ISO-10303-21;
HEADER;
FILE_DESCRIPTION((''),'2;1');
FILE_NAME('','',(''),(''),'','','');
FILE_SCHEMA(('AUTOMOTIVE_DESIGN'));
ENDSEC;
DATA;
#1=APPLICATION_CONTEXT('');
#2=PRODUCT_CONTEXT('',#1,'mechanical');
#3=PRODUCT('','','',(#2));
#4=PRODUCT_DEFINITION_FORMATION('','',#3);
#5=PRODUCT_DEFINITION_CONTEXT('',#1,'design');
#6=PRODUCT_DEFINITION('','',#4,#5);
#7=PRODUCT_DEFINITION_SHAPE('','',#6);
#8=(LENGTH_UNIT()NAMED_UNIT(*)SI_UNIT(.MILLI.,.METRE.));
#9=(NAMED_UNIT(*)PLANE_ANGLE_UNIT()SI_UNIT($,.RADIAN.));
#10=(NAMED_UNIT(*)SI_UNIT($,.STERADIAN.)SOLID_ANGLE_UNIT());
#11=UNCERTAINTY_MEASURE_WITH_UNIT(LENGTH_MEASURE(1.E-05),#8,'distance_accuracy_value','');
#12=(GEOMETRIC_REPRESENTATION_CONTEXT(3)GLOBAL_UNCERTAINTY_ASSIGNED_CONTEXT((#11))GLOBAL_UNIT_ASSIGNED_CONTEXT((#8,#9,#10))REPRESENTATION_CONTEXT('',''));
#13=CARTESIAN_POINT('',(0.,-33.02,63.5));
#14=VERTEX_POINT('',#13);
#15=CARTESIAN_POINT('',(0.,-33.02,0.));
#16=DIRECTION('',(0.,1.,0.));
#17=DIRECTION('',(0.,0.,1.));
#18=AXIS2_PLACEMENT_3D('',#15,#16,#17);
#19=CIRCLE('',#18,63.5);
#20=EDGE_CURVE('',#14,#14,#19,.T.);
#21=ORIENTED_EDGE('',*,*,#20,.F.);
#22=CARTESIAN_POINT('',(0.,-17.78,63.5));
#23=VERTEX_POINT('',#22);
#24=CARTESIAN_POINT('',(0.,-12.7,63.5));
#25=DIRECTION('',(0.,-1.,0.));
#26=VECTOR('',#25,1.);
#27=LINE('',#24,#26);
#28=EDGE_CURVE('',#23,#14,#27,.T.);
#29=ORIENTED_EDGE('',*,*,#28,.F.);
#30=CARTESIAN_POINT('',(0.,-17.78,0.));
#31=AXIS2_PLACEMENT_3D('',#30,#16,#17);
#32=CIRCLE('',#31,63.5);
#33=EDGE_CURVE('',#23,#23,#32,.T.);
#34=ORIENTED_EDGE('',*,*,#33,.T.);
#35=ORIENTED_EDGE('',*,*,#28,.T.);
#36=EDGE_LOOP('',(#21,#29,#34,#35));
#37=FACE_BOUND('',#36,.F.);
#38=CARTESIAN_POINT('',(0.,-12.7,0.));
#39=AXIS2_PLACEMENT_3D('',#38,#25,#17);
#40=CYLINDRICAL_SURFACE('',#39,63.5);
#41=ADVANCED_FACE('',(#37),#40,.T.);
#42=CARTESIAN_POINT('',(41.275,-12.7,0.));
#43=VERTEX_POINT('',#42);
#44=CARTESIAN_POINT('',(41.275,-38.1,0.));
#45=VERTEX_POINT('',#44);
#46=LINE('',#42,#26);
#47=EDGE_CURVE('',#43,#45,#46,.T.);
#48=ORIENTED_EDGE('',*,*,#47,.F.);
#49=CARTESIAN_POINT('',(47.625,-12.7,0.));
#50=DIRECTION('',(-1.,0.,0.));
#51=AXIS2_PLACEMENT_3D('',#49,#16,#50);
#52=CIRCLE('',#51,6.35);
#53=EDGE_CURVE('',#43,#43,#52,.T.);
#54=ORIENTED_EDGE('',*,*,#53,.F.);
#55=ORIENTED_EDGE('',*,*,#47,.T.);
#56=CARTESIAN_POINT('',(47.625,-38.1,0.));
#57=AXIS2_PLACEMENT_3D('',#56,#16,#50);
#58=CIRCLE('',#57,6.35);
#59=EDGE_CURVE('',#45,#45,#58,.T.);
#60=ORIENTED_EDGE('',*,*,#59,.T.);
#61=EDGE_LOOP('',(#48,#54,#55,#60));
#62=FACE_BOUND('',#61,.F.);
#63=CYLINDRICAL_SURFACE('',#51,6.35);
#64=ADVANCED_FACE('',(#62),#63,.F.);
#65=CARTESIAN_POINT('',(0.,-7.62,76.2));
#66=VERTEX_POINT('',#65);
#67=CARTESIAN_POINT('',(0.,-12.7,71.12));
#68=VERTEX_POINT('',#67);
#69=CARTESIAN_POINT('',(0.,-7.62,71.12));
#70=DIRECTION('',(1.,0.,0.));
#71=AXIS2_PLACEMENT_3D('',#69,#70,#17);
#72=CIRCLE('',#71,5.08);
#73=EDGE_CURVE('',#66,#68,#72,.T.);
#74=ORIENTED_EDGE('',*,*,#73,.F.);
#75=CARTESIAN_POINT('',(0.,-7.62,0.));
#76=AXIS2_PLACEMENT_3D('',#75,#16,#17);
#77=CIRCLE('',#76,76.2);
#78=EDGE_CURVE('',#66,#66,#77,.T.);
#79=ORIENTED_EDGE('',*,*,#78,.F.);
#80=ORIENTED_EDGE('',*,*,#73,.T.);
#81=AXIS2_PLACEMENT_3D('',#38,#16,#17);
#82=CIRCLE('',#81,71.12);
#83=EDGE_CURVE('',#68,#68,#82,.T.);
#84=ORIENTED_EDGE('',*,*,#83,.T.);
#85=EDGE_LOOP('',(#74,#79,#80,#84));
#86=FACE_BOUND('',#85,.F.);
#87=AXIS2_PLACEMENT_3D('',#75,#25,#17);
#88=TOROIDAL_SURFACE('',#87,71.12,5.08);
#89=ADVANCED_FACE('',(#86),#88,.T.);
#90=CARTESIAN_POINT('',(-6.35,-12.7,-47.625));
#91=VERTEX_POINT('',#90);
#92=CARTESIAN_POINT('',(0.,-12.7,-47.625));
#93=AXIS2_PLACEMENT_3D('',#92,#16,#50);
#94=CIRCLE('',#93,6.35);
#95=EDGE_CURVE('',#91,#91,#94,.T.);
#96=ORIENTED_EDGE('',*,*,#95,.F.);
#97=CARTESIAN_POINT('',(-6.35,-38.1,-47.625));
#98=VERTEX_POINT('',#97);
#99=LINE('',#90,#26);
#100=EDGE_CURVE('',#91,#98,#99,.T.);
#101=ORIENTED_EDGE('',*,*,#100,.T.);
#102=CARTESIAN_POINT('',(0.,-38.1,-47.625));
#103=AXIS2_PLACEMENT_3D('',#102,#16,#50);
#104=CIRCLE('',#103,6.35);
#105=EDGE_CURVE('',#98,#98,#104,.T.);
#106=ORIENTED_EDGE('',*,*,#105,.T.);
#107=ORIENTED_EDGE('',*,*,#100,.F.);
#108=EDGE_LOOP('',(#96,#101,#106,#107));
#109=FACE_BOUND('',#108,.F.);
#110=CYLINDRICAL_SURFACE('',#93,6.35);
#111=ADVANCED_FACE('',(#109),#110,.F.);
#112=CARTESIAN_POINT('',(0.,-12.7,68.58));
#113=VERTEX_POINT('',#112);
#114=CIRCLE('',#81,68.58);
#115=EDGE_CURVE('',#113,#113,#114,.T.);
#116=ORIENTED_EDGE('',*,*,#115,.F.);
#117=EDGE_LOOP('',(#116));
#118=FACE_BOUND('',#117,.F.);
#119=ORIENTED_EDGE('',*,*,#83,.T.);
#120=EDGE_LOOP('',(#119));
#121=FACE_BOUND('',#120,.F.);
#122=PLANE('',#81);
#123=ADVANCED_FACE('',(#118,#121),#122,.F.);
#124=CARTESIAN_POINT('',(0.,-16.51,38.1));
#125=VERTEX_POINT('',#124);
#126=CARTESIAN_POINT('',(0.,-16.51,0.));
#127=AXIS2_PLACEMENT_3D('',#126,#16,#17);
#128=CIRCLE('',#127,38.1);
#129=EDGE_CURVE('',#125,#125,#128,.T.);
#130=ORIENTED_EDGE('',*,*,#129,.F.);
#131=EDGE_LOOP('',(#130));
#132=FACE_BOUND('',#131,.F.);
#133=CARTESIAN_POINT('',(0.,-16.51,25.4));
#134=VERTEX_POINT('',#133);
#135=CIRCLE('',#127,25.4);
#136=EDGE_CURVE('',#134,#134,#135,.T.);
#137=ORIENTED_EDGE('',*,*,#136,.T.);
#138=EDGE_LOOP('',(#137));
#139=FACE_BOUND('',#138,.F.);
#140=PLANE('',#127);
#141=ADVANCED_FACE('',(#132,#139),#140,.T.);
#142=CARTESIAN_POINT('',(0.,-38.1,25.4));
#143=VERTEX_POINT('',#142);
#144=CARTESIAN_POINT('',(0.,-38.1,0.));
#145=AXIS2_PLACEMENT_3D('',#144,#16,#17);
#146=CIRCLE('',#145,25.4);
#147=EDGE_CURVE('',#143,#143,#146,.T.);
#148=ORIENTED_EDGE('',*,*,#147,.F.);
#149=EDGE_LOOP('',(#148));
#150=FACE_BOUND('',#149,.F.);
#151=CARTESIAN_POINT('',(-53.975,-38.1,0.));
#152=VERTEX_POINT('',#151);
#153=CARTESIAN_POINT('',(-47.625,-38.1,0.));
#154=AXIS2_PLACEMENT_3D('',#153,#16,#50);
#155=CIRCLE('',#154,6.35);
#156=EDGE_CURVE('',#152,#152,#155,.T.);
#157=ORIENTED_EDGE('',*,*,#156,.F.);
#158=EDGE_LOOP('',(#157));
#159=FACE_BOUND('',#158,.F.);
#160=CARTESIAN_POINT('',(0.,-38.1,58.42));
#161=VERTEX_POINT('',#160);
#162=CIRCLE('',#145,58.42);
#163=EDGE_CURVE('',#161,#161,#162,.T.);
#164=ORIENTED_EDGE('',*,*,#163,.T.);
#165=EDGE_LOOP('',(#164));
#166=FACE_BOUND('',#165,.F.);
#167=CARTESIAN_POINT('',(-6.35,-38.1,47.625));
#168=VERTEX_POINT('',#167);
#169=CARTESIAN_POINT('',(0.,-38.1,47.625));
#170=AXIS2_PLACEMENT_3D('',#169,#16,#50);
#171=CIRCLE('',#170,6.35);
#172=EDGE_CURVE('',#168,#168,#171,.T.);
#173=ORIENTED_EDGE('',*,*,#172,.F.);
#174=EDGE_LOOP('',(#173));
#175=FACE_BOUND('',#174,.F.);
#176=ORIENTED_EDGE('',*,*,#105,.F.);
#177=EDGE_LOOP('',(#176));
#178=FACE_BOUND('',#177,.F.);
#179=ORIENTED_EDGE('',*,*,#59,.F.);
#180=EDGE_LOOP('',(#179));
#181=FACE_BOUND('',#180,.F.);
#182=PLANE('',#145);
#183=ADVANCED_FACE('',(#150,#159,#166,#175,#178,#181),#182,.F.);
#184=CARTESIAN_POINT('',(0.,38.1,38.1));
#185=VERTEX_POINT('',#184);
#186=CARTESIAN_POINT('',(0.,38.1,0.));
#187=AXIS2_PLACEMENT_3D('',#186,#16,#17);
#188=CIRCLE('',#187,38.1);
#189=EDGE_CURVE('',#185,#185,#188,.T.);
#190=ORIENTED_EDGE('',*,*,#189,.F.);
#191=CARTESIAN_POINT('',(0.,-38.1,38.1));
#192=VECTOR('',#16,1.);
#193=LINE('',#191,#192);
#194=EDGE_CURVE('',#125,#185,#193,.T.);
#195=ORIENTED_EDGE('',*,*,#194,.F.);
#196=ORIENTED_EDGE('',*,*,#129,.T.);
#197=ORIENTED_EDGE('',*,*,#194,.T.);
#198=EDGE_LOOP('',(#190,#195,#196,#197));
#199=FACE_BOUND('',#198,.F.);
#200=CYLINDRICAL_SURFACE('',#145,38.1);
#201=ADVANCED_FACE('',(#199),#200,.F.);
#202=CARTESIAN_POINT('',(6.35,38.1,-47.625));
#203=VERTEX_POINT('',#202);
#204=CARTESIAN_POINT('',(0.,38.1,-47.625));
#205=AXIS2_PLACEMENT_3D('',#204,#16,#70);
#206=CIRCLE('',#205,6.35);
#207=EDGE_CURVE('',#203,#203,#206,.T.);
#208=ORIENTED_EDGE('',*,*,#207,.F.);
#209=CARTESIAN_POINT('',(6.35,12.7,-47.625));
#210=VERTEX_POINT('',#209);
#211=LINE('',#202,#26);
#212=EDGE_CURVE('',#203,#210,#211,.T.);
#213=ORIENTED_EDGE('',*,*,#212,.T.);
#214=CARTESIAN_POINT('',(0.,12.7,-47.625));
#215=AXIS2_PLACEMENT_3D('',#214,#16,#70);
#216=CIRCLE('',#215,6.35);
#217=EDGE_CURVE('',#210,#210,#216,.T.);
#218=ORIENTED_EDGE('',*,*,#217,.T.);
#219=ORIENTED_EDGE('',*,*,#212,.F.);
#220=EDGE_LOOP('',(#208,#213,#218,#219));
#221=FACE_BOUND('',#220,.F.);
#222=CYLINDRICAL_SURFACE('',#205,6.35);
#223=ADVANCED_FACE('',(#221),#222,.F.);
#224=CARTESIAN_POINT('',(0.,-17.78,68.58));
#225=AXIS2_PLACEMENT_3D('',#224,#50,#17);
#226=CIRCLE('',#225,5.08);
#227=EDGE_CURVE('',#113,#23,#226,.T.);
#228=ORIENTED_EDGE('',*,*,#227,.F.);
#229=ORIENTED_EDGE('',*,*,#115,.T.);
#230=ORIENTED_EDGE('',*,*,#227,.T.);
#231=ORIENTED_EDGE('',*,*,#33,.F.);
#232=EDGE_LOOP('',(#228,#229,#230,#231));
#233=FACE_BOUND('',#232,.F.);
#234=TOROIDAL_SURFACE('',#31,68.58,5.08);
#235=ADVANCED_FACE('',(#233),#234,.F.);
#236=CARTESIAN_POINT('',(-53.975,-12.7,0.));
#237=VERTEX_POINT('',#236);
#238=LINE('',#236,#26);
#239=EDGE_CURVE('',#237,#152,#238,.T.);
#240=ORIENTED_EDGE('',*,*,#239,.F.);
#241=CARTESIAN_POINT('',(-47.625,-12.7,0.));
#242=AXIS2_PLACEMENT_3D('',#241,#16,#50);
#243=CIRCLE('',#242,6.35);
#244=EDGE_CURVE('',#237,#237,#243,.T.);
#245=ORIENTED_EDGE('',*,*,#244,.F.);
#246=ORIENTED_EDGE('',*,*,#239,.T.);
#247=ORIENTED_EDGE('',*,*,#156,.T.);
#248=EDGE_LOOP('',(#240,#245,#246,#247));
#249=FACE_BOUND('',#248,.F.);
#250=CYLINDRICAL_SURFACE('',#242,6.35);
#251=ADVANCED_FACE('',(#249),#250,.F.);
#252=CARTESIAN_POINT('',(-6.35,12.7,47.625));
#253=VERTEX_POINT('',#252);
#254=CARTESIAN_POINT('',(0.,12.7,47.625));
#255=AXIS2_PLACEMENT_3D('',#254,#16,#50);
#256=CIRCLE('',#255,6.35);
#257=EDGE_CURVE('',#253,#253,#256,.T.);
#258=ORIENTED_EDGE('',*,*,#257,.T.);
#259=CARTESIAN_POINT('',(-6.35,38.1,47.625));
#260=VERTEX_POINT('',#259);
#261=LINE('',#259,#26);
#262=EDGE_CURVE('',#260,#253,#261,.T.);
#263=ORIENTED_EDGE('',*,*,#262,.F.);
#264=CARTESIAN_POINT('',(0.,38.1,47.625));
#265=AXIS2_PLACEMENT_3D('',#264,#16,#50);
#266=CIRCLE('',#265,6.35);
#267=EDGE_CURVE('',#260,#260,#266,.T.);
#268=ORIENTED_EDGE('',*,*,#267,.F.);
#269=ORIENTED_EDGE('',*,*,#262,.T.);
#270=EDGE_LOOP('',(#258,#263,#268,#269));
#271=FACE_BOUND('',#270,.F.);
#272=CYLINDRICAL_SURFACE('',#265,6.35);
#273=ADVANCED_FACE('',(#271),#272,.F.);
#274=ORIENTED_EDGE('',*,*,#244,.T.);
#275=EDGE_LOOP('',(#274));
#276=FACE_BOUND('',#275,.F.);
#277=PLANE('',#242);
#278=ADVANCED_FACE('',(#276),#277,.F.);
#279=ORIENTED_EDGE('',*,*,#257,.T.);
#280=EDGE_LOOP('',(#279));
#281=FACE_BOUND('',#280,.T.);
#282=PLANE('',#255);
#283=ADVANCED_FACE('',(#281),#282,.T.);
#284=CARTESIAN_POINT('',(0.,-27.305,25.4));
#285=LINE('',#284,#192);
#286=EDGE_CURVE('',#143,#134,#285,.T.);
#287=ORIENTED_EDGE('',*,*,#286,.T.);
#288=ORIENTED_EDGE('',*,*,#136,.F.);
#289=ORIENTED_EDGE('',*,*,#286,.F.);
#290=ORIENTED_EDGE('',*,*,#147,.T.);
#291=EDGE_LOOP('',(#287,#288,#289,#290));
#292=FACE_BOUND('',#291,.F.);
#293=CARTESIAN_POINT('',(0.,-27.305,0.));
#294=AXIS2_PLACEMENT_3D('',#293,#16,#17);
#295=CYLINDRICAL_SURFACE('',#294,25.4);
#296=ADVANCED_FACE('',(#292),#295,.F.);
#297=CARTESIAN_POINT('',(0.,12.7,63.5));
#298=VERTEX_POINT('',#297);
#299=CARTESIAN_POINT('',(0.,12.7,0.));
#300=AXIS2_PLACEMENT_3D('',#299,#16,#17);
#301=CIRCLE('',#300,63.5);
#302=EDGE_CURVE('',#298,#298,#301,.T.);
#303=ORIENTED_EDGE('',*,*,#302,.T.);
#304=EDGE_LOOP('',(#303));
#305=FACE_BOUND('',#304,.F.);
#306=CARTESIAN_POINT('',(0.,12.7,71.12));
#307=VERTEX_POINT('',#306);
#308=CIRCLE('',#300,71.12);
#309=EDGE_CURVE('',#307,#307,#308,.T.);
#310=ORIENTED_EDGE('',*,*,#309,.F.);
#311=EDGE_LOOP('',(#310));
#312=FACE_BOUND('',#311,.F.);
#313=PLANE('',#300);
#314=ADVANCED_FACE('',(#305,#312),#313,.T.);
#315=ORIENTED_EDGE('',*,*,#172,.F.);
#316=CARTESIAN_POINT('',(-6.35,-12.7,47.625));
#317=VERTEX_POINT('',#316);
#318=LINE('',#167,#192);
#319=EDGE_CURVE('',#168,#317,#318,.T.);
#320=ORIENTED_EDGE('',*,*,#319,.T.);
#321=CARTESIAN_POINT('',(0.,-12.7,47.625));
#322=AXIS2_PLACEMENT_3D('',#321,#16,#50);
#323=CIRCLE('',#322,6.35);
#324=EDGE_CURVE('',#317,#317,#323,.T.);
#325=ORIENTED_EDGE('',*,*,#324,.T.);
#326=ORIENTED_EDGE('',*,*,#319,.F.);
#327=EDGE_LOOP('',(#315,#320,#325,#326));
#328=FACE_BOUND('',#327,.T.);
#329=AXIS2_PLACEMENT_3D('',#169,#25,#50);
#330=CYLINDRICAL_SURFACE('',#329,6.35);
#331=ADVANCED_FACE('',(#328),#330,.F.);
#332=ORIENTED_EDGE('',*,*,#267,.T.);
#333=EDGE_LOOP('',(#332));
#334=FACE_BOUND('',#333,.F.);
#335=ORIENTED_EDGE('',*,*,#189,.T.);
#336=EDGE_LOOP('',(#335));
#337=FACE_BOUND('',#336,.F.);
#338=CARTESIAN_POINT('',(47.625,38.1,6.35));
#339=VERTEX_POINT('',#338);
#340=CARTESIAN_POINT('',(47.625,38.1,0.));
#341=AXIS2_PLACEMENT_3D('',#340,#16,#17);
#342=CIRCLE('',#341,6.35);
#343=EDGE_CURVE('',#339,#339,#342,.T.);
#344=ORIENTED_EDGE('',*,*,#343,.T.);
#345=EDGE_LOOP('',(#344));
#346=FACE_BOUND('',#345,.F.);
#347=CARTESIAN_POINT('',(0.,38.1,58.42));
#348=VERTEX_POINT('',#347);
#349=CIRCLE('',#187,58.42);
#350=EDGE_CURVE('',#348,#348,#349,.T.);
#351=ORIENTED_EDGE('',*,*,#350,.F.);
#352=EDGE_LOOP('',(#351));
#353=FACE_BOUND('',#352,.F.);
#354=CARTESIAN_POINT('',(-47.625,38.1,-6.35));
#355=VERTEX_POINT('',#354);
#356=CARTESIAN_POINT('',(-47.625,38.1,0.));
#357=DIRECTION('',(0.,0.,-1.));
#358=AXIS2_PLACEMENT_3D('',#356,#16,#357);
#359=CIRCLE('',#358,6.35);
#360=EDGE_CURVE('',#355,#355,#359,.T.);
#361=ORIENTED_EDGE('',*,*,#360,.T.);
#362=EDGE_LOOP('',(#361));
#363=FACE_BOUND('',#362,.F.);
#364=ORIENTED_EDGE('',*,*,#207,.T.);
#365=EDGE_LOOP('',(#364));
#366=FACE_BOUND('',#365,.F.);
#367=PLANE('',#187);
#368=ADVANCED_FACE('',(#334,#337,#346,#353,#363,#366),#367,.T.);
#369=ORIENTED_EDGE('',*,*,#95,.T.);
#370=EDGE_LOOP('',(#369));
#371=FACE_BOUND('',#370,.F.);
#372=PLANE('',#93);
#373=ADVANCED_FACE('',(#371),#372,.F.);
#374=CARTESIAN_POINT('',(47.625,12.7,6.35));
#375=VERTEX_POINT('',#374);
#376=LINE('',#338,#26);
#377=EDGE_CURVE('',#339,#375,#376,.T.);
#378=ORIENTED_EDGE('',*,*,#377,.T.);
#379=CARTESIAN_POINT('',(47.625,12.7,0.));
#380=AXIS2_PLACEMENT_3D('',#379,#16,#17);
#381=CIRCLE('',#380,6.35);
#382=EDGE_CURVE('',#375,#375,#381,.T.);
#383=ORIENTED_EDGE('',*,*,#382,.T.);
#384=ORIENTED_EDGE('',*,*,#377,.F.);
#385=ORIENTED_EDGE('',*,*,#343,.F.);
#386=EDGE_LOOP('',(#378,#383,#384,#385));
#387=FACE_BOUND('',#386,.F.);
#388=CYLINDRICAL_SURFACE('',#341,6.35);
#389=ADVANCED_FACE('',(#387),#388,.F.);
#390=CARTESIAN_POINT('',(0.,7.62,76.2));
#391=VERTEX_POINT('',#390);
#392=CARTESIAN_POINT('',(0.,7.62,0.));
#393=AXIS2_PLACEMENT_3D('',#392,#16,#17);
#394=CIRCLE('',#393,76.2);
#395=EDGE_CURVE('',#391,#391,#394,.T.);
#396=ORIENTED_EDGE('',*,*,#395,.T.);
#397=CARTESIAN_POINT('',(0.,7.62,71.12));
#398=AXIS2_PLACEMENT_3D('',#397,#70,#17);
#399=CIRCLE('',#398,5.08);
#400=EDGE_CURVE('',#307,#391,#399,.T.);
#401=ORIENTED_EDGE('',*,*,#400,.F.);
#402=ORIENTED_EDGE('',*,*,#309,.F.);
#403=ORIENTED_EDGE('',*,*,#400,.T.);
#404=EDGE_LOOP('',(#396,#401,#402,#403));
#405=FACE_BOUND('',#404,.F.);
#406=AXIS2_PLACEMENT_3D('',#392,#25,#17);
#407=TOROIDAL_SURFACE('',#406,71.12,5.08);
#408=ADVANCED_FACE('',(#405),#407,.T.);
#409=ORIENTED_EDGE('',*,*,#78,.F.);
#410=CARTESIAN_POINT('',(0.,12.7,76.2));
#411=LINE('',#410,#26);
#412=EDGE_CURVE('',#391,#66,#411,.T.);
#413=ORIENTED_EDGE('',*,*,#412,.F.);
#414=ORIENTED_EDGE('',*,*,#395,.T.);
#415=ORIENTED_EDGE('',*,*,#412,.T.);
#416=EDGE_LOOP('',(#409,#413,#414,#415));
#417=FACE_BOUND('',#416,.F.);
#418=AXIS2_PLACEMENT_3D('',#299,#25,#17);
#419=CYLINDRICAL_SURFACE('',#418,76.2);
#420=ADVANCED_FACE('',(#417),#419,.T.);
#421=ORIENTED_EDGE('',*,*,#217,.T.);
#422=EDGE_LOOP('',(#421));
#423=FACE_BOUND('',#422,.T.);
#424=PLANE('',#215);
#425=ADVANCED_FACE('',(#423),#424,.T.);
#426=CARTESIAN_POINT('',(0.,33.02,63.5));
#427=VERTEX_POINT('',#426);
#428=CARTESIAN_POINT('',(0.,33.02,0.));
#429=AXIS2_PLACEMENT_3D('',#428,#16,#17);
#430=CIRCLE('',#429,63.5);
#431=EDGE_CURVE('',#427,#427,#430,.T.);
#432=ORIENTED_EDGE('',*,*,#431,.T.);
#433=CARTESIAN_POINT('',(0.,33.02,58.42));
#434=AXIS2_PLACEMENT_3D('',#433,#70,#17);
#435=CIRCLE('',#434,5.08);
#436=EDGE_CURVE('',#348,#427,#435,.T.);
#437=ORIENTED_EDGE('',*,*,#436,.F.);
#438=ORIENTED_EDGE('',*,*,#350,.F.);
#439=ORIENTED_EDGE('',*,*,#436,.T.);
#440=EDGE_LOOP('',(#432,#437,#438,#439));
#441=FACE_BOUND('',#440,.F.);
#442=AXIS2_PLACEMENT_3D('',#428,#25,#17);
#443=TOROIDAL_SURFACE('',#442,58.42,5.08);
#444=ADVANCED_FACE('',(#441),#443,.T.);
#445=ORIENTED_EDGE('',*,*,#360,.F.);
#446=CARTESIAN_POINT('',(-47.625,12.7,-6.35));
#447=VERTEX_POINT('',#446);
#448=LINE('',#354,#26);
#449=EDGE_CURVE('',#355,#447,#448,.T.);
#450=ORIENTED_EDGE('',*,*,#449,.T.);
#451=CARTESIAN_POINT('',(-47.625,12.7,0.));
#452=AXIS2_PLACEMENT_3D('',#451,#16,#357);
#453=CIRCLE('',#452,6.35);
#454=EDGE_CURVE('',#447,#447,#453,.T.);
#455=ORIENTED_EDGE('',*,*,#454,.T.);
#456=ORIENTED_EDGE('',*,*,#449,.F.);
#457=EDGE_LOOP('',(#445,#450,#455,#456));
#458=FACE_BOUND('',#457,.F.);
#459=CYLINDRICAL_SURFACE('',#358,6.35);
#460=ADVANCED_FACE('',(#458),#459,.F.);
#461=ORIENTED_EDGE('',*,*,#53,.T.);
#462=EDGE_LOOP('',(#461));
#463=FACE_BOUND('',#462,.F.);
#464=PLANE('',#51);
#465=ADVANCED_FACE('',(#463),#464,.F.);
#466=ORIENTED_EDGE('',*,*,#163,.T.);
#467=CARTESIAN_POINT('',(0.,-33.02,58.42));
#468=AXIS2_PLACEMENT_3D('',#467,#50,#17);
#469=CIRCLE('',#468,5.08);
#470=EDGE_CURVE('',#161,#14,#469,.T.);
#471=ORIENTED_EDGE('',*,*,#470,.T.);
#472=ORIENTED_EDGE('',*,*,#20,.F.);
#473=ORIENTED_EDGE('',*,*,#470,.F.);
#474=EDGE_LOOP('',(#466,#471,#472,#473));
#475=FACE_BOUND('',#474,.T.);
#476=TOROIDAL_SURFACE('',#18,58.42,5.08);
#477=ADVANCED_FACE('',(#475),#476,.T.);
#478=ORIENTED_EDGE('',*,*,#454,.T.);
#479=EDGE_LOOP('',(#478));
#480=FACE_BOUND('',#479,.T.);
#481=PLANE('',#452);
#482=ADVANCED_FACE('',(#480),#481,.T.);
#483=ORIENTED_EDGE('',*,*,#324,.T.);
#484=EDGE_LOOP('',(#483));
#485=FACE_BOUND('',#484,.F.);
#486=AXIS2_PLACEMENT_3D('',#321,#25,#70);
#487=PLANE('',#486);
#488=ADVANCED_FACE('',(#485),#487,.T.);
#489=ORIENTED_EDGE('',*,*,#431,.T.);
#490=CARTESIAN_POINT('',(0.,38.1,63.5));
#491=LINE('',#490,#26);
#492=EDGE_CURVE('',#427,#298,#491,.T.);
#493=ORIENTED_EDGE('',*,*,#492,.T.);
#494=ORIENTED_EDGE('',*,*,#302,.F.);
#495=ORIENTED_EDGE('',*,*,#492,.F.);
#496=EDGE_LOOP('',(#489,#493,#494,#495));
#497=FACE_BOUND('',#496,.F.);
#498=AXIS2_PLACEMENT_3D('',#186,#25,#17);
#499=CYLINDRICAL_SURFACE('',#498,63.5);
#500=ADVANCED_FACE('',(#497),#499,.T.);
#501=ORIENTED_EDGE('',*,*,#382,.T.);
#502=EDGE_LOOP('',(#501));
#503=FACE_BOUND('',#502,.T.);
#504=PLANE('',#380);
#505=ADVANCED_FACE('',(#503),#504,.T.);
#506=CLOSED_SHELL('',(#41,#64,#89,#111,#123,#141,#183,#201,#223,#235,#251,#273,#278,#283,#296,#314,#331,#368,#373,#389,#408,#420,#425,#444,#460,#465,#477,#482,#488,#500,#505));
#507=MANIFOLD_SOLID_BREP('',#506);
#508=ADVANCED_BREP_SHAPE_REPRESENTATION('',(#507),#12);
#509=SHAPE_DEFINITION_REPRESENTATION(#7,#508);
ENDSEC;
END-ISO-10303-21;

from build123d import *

# Parameters (mm, degrees)
F0_W             = 21.59
F0_H             = 12.7
F2_R             = 5.08
F3_R             = 6.35
F4_DEPTH         = 25.4
F4_COPIES_COUNT  = 4
F4_COPIES2_COUNT = 2
F4_COPIES2_PITCH = 84.361847
F4_COPIES3_COUNT = 2
F4_COPIES3_PITCH = 84.361847
F4_COPIES4_COUNT = 2
F4_COPIES4_PITCH = 107.95


# Not quite as in the source:
# - a pattern or mirror of a feature is missing from the dataset's text; its kind, count and spacing are read off the source's solid


with BuildPart() as f1:
    # F0 (on Right) → F1 (revolve)
    with BuildSketch(Plane.YZ):
        Polygon((-38.1, 63.5), (-38.1, 38.1), (-16.51, 38.1), (38.1, 38.1), (38.1, 63.5), (12.7, 63.5), (12.7, 76.2), (-12.7, 76.2), (-12.7, 63.5), align=None)
        with Locations((-27.305, 31.75)):
            Rectangle(F0_W, F0_H)
    revolve(axis=Axis((0, 4.9274371037, 0), (0, 1, 0)))

    # F2
    f2_edges = [f1.edges().sort_by_distance(p)[0] for p in [
        (0, -12.7, -63.5),
        (0, -12.7, -76.2),
        (0, 12.7, -76.2),
        (0, 38.1, -63.5),
        (0, -38.1, -63.5),
    ]]
    fillet(f2_edges, radius=F2_R)

    # F3 (on face) → F4 (cut)
    with BuildSketch(Plane(origin=(0, 38.1, 0), x_dir=(-1, 0, 0), z_dir=(0, 1, 0))):
        with Locations((0, 47.625)):
            Circle(F3_R)
    f4 = extrude(amount=-F4_DEPTH, mode=Mode.SUBTRACT)

    # F4_copies: F4 ×4 about axis
    f4_copies_axis = Axis((0, 0, 0), (0, 1, 0))
    for i in range(1, F4_COPIES_COUNT):
        add(f4.rotate(f4_copies_axis, i * 360 / F4_COPIES_COUNT), mode=Mode.SUBTRACT)

    # F4_copies1: F4 across plane
    add(f4.mirror(Plane(origin=(0, 0, 0), x_dir=(0, 0, -1), z_dir=(0, -1, 0))), mode=Mode.SUBTRACT)

    # F4_copies2: F4 ×2
    with Locations(*[Vector(0.5645324471, -0.6021679436, -0.5645324471) * (i * F4_COPIES2_PITCH) for i in range(1, F4_COPIES2_COUNT)]):
        add(f4, mode=Mode.SUBTRACT)

    # F4_copies3: F4 ×2
    with Locations(*[Vector(-0.5645324471, -0.6021679436, -0.5645324471) * (i * F4_COPIES3_PITCH) for i in range(1, F4_COPIES3_COUNT)]):
        add(f4, mode=Mode.SUBTRACT)

    # F4_copies4: F4 ×2
    with Locations(*[Vector(0, -0.4705882353, -0.8823529412) * (i * F4_COPIES4_PITCH) for i in range(1, F4_COPIES4_COUNT)]):
        add(f4, mode=Mode.SUBTRACT)


solid = f1.part
